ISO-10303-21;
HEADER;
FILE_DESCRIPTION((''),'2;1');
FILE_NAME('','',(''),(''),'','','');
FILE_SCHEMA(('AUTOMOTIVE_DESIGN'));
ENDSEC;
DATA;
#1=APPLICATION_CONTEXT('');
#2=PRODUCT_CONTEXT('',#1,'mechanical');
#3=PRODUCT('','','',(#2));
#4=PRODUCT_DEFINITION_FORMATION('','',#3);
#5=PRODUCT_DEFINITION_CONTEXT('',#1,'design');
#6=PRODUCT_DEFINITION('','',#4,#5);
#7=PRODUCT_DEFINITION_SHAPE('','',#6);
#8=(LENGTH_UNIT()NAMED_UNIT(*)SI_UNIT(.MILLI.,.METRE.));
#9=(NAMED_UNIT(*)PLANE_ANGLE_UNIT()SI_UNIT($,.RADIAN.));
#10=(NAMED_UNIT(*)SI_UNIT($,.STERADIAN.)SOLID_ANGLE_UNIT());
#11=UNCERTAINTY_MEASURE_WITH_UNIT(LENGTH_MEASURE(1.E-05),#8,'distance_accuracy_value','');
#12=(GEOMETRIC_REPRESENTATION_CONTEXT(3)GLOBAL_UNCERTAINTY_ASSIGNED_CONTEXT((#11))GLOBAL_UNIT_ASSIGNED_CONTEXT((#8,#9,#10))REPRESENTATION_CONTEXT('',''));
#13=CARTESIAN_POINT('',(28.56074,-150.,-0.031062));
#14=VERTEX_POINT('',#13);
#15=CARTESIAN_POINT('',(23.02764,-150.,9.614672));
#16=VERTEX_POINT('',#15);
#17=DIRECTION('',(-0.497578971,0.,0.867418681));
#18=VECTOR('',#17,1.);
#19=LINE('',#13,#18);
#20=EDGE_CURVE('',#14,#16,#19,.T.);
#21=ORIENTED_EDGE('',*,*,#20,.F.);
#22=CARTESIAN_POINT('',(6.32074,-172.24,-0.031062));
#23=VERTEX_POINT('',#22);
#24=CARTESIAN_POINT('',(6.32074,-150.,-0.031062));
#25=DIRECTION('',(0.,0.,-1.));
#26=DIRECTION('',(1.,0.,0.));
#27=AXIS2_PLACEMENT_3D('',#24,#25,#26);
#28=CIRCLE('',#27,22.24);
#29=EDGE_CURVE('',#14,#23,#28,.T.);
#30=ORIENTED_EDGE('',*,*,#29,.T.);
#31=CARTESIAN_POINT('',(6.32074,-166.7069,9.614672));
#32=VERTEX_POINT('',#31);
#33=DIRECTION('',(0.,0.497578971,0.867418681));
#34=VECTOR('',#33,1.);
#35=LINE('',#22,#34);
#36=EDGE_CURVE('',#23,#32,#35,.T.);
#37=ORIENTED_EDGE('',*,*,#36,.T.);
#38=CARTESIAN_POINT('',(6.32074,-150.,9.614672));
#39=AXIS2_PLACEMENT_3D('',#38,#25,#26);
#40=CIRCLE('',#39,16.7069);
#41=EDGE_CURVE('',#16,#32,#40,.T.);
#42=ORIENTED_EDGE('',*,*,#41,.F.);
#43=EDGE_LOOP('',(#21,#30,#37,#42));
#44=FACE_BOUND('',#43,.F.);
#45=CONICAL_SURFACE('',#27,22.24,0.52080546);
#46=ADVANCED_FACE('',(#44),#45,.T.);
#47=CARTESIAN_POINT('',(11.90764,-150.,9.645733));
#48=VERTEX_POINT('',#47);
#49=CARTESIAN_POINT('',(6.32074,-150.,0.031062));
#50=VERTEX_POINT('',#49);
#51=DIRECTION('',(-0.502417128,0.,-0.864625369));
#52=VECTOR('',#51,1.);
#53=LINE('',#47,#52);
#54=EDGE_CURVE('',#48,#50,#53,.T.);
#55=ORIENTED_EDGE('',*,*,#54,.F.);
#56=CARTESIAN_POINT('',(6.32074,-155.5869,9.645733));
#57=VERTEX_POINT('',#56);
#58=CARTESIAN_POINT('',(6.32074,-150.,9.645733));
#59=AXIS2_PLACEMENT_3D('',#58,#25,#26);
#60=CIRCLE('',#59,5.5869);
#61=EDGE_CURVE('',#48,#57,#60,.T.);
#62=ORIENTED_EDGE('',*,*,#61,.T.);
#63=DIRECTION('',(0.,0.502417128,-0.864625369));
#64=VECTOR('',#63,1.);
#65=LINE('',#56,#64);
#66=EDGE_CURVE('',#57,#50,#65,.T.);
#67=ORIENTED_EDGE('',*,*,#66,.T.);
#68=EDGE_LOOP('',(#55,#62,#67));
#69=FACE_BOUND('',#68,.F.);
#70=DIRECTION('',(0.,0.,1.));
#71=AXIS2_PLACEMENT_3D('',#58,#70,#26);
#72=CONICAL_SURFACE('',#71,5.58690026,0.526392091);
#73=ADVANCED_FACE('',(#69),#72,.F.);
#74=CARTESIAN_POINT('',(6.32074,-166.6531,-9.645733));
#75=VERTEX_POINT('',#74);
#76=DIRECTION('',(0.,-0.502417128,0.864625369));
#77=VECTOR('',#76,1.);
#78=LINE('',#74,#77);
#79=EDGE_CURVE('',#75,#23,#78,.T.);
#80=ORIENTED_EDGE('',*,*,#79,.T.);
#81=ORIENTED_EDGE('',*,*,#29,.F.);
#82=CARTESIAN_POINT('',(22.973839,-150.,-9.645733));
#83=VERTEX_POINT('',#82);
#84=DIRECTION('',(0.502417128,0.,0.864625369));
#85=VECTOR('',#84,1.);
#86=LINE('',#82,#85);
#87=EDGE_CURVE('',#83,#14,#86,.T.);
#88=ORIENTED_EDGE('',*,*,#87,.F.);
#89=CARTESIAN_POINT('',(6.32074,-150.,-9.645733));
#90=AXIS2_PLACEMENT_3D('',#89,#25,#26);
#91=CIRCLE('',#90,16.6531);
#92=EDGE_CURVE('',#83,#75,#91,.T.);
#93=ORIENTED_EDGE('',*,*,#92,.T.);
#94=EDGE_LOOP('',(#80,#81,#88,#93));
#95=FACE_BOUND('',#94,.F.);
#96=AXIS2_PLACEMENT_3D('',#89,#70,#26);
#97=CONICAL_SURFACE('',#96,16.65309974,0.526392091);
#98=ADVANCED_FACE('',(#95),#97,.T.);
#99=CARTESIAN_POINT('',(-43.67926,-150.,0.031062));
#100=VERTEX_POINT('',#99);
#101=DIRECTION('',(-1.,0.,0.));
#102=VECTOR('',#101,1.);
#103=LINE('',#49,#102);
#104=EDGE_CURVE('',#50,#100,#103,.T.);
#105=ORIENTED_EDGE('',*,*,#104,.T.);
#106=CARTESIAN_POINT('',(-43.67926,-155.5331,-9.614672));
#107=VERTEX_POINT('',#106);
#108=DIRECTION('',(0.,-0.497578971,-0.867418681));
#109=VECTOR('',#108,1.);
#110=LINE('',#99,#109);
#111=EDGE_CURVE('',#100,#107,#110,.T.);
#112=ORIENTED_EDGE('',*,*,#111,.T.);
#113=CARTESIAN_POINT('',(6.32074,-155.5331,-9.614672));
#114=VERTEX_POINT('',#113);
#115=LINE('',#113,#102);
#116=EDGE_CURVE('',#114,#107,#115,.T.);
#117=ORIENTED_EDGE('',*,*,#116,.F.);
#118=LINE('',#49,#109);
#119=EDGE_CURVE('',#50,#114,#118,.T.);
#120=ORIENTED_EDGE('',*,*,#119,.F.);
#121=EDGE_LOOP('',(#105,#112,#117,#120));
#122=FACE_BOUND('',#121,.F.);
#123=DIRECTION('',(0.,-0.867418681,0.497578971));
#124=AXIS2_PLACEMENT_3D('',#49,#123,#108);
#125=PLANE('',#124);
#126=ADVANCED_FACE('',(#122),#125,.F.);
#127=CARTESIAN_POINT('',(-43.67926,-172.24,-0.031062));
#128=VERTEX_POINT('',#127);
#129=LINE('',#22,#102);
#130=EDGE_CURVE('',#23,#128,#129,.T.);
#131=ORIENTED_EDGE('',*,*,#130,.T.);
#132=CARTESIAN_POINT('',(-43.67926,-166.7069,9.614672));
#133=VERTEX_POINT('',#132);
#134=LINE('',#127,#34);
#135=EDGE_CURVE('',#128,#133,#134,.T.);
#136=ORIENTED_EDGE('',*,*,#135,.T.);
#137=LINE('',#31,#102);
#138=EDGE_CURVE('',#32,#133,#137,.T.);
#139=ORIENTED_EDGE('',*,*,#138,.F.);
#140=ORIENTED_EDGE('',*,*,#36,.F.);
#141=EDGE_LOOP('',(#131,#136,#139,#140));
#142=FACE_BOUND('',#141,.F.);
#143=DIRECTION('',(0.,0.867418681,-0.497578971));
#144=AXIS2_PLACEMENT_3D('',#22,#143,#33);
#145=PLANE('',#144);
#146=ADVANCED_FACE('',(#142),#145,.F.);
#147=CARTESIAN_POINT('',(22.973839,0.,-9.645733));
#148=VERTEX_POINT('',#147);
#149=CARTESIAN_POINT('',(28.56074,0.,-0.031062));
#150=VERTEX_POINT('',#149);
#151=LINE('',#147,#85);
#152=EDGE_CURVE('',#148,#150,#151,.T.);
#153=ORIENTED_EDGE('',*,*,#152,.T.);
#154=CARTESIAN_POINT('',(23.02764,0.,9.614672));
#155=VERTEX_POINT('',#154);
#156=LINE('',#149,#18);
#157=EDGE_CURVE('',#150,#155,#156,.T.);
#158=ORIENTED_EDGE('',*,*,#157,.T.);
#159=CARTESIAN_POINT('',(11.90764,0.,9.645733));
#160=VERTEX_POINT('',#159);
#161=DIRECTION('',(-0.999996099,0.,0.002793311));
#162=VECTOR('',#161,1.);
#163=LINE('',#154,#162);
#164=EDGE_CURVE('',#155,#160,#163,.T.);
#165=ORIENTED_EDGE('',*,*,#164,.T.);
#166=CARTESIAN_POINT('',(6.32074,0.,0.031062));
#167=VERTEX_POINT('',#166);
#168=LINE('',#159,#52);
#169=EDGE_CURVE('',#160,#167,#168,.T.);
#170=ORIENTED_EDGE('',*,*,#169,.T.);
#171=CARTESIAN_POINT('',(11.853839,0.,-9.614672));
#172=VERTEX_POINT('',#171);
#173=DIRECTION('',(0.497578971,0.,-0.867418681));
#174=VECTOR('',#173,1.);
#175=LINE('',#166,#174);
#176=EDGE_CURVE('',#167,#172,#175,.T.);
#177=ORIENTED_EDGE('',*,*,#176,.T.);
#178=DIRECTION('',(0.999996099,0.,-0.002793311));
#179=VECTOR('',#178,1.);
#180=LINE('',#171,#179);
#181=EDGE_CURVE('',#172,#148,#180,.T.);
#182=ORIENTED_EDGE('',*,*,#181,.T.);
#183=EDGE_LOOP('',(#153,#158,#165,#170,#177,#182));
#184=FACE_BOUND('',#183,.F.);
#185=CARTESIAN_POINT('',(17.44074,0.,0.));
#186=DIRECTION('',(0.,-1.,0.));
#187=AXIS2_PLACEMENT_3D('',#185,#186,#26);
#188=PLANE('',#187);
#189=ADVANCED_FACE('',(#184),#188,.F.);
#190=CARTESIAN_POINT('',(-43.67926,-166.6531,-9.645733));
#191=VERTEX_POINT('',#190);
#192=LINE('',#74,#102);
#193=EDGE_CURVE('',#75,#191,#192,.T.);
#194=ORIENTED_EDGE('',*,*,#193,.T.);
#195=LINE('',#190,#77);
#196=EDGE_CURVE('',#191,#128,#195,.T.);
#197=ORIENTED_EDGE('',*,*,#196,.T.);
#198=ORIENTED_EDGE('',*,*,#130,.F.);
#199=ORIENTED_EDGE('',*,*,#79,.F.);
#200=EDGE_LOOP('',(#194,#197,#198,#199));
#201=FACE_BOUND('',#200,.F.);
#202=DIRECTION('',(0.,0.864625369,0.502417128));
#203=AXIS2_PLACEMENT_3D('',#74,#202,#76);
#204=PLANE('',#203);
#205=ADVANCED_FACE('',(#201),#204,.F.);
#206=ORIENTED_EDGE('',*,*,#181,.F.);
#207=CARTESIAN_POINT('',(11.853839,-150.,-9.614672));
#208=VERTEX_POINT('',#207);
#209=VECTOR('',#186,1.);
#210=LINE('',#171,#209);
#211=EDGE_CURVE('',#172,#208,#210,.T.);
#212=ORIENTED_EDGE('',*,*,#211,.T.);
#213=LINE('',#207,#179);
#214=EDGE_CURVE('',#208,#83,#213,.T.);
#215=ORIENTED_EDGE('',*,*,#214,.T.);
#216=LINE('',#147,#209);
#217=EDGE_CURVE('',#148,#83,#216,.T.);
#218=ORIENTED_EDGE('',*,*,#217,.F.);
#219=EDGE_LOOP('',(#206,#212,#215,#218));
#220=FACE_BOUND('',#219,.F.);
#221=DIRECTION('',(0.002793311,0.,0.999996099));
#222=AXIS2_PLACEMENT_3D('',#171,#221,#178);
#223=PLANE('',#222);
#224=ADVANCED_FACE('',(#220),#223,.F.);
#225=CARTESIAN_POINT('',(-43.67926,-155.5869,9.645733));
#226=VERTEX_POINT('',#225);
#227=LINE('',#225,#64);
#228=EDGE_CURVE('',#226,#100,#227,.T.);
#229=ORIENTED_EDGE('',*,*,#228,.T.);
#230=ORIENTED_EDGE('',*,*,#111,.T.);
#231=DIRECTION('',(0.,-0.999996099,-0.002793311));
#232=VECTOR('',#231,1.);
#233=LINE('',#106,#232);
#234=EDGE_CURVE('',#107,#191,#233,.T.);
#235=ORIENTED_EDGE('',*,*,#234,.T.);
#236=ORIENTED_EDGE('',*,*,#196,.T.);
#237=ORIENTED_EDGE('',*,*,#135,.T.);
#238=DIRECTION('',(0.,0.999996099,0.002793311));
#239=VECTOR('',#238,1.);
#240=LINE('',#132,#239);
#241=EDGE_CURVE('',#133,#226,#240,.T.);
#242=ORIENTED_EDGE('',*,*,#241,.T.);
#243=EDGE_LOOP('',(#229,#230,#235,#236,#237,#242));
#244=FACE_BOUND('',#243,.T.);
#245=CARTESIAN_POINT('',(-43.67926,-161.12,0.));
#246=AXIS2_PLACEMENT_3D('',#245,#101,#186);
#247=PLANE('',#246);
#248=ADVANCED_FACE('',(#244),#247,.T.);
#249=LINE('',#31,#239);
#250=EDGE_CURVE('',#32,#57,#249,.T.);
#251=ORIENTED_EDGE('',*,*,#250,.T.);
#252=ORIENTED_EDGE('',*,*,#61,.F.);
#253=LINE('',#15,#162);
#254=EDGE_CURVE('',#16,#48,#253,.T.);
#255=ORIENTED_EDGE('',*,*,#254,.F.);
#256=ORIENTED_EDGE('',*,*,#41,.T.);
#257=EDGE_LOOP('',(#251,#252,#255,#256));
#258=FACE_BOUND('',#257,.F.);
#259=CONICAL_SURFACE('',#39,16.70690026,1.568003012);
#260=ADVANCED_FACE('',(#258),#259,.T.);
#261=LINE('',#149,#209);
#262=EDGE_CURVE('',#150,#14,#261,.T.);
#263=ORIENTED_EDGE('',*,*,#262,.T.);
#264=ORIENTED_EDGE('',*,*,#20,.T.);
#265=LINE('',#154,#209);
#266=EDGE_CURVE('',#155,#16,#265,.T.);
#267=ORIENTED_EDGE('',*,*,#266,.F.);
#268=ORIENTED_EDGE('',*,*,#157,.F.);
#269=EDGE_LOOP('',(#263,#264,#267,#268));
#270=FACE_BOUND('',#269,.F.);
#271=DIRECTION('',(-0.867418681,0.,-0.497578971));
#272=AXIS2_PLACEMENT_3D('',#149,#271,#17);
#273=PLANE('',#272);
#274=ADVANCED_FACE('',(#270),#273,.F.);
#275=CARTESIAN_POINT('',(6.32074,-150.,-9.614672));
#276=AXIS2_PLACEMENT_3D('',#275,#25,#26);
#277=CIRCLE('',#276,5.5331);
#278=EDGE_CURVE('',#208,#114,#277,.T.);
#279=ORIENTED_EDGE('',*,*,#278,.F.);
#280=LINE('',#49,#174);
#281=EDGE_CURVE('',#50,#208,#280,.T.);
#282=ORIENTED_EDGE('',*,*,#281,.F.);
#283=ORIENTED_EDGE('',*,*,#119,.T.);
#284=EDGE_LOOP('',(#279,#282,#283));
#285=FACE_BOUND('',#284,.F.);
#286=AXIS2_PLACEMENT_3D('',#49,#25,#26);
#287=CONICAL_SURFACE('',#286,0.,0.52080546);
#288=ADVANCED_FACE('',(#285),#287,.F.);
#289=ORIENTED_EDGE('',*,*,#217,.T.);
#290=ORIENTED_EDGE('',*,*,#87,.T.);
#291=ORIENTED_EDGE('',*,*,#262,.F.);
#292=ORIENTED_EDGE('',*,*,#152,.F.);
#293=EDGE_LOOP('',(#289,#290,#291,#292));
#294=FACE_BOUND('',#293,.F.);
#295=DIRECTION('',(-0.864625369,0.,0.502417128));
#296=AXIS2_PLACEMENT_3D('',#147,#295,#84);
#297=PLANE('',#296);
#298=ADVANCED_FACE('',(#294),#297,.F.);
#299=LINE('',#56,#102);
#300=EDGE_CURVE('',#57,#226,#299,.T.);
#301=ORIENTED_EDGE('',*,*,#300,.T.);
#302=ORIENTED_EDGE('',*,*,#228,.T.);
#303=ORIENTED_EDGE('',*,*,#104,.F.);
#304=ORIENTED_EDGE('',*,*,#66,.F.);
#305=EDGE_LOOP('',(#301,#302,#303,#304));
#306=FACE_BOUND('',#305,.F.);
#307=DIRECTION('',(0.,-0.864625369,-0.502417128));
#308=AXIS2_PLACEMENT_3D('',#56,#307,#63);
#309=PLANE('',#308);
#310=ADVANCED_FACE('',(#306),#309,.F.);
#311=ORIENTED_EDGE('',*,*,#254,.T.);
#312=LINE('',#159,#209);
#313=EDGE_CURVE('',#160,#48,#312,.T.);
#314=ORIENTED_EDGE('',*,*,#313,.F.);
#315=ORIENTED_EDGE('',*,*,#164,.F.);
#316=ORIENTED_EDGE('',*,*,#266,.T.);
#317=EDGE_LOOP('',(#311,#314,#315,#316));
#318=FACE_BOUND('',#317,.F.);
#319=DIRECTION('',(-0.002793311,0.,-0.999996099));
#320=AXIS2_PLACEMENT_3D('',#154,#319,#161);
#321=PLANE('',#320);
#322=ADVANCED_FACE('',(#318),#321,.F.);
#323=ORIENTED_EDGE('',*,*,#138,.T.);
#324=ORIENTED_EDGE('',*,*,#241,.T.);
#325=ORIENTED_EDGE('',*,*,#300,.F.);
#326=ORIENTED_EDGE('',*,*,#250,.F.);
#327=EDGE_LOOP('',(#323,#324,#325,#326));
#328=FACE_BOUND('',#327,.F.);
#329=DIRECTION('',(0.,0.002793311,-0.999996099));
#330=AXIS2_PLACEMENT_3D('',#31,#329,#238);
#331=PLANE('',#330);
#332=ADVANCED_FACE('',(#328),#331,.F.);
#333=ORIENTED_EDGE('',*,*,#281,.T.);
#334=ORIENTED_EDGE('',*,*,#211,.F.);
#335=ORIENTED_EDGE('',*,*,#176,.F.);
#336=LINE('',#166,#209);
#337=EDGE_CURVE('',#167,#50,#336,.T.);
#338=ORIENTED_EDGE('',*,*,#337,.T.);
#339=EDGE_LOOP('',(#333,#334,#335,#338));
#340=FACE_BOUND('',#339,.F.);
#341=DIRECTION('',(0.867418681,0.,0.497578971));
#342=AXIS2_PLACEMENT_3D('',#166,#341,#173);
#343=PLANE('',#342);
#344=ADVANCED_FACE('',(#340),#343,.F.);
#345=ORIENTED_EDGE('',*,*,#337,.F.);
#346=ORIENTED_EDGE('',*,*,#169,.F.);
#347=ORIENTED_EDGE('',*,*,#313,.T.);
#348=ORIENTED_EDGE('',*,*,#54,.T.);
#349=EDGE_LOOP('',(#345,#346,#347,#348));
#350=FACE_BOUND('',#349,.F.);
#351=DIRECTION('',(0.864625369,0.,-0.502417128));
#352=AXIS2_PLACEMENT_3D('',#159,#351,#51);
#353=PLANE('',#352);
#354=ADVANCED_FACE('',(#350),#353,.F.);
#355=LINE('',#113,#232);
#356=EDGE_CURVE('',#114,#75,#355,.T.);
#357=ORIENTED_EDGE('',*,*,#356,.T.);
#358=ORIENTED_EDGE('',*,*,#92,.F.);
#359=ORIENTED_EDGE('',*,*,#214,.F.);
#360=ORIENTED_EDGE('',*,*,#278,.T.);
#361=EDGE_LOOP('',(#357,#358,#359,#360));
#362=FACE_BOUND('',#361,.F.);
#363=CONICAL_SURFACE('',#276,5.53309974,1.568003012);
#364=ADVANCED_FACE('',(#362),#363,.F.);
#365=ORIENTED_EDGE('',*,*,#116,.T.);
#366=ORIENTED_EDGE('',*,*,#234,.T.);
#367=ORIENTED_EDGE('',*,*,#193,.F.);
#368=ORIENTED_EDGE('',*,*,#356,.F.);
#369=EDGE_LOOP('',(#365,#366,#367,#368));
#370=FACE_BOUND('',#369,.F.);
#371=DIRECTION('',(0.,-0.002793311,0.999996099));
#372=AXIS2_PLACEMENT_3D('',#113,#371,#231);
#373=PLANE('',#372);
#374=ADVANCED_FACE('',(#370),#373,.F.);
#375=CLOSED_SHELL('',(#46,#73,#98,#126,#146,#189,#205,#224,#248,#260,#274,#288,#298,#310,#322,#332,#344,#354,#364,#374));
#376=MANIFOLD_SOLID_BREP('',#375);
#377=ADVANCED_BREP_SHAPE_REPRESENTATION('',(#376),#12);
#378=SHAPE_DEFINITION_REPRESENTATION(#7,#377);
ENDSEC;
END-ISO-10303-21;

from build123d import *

# Parameters (mm, degrees)
F1_DEPTH = 150
F3_ANGLE = 90
F4_DEPTH = 50


with BuildPart() as f1:
    # F0 (on Front) → F1 (new body)
    with BuildSketch(Plane.XZ):
        Polygon((22.9738393507, -9.6457333625), (28.5607396108, -0.0310617447), (23.0276398708, 9.6146716177), (11.9076398708, 9.6457333625), (6.3207396108, 0.0310617447), (11.8538393507, -9.6146716177), align=None)
    extrude(amount=F1_DEPTH)

    # F2 (on face) → F3 (revolve)
    with BuildSketch(Plane.XZ.offset(150)):
        Polygon((11.9076398708, 9.6457333625), (6.3207396108, 0.0310617447), (11.8538393507, -9.6146716177), (22.9738393507, -9.6457333625), (28.5607396108, -0.0310617447), (23.0276398708, 9.6146716177), align=None)
    revolve(axis=Axis((6.3207396108, -150, 14.933847028), (0, 0, -1)), revolution_arc=F3_ANGLE)

    # F4 (add): a face of the model
    f4_faces = [f1.faces().sort_by_distance(p)[0] for p in [
        (6.3207396108, -161.12, 0),
    ]]
    extrude(f4_faces, amount=F4_DEPTH)


solid = f1.part
